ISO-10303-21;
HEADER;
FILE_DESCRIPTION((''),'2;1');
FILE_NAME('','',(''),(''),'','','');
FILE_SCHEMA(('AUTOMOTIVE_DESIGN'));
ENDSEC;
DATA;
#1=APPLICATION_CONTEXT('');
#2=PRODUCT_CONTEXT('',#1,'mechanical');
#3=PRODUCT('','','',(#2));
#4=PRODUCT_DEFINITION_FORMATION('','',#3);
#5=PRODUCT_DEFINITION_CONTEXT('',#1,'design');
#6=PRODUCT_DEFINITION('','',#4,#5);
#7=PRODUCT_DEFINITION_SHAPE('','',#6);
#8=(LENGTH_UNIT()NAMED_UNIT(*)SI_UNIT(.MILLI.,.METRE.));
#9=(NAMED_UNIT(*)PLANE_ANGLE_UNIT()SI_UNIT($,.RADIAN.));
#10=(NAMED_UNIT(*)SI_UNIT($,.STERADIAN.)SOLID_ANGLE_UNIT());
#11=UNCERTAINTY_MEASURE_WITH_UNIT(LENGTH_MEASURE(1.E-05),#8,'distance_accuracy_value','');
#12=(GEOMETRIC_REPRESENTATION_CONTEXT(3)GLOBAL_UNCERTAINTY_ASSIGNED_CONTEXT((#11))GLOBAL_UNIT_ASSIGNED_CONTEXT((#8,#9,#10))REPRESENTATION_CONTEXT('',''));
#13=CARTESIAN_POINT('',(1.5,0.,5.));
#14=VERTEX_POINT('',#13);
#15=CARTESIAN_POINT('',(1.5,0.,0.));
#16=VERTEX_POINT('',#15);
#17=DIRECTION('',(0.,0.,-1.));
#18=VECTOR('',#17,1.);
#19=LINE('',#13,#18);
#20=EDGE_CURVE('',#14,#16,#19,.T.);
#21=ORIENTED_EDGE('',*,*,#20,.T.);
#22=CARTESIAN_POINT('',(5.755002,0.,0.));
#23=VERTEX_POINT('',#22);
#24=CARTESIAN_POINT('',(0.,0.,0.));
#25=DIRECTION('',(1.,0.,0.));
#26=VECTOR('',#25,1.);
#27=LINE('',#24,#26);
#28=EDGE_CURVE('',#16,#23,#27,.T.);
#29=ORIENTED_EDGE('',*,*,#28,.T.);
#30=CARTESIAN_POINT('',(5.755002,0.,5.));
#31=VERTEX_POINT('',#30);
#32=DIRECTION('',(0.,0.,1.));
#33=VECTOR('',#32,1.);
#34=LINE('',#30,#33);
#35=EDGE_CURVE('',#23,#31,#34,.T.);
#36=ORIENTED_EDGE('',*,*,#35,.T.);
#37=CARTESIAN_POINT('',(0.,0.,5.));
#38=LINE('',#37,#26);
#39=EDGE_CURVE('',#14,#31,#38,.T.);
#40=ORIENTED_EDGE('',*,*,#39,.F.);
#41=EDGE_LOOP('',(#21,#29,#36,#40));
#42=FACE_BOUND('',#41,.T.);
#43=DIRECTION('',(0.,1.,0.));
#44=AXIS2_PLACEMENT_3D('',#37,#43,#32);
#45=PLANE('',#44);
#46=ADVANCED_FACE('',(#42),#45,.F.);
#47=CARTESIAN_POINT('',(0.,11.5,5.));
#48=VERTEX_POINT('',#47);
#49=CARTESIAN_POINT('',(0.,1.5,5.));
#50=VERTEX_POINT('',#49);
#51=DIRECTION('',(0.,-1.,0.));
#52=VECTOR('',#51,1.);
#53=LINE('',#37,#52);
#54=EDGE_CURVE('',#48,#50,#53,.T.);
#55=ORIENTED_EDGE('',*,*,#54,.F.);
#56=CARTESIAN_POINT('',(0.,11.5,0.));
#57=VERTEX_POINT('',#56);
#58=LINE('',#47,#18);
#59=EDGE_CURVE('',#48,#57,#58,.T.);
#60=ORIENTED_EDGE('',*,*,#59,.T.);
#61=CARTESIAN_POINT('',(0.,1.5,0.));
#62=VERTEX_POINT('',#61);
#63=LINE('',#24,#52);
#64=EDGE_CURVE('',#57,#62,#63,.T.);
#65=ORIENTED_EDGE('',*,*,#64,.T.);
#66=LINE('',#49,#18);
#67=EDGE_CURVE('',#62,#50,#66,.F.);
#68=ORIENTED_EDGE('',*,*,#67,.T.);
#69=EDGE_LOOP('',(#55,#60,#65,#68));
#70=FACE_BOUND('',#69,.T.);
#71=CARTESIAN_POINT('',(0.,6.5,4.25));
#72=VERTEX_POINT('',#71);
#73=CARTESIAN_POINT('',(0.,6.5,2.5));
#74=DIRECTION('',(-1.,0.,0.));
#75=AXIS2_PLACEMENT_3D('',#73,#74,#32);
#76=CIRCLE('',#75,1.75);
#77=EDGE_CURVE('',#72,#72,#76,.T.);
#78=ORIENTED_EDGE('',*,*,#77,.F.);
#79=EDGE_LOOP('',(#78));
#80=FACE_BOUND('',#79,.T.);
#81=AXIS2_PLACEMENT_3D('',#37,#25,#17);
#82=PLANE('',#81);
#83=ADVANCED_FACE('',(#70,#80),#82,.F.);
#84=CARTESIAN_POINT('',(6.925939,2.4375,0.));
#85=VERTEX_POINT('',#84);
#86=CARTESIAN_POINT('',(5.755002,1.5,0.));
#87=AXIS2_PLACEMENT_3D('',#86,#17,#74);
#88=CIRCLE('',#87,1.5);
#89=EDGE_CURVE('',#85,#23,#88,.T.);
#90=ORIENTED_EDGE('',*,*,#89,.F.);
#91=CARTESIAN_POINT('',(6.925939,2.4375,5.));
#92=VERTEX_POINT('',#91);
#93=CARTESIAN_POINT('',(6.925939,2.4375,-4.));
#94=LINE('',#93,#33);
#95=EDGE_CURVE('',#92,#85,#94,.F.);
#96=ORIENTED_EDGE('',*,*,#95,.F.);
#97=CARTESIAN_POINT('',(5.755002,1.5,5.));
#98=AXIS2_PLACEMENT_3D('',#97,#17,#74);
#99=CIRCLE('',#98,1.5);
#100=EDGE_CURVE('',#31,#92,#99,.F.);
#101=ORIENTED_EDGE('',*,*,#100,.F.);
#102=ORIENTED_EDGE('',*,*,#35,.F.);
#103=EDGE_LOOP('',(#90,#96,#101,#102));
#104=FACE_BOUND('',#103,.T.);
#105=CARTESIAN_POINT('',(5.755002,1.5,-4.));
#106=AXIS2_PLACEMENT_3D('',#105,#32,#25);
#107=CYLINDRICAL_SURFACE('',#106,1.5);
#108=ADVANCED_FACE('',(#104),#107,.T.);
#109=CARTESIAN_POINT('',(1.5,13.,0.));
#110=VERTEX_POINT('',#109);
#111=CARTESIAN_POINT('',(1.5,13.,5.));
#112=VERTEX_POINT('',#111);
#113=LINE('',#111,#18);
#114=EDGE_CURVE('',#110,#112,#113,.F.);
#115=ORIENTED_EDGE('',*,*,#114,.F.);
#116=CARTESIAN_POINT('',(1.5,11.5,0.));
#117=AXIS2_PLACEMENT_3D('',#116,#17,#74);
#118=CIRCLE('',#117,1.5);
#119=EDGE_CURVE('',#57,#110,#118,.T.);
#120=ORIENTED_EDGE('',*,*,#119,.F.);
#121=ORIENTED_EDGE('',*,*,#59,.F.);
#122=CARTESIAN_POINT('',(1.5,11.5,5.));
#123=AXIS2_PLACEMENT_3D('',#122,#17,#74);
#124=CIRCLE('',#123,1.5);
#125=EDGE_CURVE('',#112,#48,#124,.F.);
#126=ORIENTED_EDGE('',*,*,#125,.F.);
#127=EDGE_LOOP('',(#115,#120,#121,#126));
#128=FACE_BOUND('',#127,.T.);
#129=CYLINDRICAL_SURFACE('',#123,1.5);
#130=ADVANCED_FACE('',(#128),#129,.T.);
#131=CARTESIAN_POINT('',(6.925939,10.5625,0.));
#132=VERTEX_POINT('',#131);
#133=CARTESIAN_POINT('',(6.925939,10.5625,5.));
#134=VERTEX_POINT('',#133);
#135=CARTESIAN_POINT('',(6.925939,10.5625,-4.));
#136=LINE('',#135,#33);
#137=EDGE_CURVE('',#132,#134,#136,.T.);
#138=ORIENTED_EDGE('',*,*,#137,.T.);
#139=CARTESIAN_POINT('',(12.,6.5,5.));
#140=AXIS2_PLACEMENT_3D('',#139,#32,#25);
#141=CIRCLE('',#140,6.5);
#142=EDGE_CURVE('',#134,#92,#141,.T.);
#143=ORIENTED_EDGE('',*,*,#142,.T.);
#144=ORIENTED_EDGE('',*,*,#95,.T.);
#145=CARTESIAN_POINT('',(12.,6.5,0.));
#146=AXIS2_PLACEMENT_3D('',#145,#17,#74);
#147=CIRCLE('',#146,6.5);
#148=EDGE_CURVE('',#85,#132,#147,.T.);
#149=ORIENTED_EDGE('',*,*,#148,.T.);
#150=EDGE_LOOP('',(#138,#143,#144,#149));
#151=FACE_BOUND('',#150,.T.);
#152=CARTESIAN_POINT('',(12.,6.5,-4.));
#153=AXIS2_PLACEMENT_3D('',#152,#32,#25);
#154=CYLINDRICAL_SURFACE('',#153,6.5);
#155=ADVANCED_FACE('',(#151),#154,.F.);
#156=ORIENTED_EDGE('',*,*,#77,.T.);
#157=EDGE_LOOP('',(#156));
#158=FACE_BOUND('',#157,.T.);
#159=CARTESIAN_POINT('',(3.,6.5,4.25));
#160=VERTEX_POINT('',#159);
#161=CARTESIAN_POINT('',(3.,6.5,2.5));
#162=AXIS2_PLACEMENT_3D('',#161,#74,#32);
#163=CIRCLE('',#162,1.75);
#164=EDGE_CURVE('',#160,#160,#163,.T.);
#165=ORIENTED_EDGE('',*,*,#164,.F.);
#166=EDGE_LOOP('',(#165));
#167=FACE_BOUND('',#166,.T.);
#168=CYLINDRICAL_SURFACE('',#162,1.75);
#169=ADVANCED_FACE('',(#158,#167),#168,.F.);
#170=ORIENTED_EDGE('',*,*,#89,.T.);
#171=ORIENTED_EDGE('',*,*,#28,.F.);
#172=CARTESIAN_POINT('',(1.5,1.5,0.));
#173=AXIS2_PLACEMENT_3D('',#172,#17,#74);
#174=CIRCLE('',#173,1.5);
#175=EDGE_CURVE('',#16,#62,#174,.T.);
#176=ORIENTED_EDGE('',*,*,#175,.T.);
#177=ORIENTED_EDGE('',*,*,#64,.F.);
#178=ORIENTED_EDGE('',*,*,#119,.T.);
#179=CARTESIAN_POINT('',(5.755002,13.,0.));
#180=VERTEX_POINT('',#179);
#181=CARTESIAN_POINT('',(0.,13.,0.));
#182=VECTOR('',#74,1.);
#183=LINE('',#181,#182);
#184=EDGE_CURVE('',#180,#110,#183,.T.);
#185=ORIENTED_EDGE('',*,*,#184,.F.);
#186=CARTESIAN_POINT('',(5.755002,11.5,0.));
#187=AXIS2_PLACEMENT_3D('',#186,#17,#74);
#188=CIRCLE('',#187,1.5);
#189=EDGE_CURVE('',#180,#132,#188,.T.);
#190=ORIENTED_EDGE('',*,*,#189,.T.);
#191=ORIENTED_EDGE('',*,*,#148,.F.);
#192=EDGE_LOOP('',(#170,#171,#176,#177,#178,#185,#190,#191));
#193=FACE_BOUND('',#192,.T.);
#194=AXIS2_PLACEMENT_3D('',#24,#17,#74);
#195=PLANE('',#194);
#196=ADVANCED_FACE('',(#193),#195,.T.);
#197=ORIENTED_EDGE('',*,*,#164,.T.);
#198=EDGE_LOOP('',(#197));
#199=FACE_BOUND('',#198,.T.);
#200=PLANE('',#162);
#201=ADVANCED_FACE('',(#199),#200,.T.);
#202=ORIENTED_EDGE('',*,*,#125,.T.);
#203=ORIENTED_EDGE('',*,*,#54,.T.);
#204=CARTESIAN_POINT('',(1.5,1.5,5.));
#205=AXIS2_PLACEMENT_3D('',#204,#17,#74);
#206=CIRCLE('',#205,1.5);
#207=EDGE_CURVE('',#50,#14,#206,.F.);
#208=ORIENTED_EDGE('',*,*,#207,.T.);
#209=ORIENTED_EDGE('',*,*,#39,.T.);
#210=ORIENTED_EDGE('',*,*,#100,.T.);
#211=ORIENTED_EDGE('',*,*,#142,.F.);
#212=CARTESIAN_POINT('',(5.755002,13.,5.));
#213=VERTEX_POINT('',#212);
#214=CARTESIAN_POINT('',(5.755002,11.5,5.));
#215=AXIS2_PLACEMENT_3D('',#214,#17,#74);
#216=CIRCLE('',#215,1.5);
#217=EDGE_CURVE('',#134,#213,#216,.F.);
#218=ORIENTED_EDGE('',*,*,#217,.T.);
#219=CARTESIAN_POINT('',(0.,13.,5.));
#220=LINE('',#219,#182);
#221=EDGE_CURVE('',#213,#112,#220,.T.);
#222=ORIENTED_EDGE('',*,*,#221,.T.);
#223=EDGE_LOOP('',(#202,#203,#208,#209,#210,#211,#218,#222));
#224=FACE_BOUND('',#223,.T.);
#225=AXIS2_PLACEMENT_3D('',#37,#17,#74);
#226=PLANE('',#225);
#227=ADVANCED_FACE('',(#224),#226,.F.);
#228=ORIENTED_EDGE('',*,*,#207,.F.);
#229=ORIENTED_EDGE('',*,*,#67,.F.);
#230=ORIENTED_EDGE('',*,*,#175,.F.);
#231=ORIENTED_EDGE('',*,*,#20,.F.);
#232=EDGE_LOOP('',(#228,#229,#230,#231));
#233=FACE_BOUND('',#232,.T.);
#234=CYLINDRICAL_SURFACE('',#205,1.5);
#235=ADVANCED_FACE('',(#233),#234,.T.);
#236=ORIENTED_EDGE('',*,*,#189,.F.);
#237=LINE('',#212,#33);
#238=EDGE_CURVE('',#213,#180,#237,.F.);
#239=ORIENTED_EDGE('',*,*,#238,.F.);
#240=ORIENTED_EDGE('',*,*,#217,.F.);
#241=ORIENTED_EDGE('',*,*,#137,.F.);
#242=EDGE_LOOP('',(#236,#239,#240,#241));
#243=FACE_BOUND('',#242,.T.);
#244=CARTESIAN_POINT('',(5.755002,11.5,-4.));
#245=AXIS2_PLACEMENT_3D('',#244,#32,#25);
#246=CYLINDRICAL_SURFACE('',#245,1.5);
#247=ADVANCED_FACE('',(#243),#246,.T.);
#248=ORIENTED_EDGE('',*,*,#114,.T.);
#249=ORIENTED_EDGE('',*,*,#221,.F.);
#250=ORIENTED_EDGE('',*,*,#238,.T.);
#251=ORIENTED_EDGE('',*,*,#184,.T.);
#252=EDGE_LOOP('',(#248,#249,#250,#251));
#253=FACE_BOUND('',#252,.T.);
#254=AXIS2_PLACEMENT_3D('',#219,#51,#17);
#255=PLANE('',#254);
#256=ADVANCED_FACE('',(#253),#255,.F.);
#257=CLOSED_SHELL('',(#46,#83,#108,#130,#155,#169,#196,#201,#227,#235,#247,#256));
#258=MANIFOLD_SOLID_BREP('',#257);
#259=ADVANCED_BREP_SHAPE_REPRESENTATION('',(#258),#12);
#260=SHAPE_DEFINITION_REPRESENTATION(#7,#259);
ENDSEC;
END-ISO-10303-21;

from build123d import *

# Parameters (mm, degrees)
SKETCH1_W           = 12
SKETCH1_H           = 13
BOSS_EXTRUDE1_DEPTH = 5
SKETCH3_R           = 6.5
CUT_EXTRUDE1_DEPTH  = 9
SKETCH4_R           = 1.75
CUT_EXTRUDE2_DEPTH  = 3
FILLET1_START       = -1
FILLET1_DEPTH       = 7
FILLET2_R           = 1.5


with BuildPart() as part:
    # Sketch1 → Boss-Extrude1 (new body)
    with BuildSketch(Plane.XY):
        with Locations((6, 6.5)):
            Rectangle(SKETCH1_W, SKETCH1_H)
    extrude(amount=BOSS_EXTRUDE1_DEPTH)

    # Sketch3 → Cut-Extrude1 (cut)
    with BuildSketch(Plane.XY.offset(5)):
        with Locations((12, 6.5)):
            Circle(SKETCH3_R)
    extrude(amount=-CUT_EXTRUDE1_DEPTH, mode=Mode.SUBTRACT)

    # Sketch4 → Cut-Extrude2 (cut)
    with BuildSketch(Plane.ZY):
        with Locations((2.5, 6.5)):
            Circle(SKETCH4_R)
    extrude(amount=-CUT_EXTRUDE2_DEPTH, mode=Mode.SUBTRACT)

    # Fillet1: read off the stored shape, not the designer's step
    # Fillet1 outline → Fillet1 (cut)
    with BuildSketch(Plane.XY.offset(FILLET1_START)):
        with BuildLine():
            ThreePointArc((5.755002002, 13), (7.10708373, 12.149519053), (6.925939126, 10.5625))
            ThreePointArc((6.925939126, 10.5625), (9.185417438, 12.359020823), (12, 13))
            Line((12, 13), (5.755002002, 13))
        make_face()
        with BuildLine():
            ThreePointArc((6.925939126, 2.4375), (7.10708373, 0.850480947), (5.755002002, 0))
            Line((5.755002002, 0), (12, 0))
            ThreePointArc((12, 0), (9.185417438, 0.640979177), (6.925939126, 2.4375))
        make_face()
    extrude(amount=FILLET1_DEPTH, mode=Mode.SUBTRACT)

    # Fillet2
    fillet2_edges = [part.edges().sort_by_distance(p)[0] for p in [
        (0, 13, 2.5),
        (0, 0, 2.5),
    ]]
    fillet(fillet2_edges, radius=FILLET2_R)


solid = part.part
